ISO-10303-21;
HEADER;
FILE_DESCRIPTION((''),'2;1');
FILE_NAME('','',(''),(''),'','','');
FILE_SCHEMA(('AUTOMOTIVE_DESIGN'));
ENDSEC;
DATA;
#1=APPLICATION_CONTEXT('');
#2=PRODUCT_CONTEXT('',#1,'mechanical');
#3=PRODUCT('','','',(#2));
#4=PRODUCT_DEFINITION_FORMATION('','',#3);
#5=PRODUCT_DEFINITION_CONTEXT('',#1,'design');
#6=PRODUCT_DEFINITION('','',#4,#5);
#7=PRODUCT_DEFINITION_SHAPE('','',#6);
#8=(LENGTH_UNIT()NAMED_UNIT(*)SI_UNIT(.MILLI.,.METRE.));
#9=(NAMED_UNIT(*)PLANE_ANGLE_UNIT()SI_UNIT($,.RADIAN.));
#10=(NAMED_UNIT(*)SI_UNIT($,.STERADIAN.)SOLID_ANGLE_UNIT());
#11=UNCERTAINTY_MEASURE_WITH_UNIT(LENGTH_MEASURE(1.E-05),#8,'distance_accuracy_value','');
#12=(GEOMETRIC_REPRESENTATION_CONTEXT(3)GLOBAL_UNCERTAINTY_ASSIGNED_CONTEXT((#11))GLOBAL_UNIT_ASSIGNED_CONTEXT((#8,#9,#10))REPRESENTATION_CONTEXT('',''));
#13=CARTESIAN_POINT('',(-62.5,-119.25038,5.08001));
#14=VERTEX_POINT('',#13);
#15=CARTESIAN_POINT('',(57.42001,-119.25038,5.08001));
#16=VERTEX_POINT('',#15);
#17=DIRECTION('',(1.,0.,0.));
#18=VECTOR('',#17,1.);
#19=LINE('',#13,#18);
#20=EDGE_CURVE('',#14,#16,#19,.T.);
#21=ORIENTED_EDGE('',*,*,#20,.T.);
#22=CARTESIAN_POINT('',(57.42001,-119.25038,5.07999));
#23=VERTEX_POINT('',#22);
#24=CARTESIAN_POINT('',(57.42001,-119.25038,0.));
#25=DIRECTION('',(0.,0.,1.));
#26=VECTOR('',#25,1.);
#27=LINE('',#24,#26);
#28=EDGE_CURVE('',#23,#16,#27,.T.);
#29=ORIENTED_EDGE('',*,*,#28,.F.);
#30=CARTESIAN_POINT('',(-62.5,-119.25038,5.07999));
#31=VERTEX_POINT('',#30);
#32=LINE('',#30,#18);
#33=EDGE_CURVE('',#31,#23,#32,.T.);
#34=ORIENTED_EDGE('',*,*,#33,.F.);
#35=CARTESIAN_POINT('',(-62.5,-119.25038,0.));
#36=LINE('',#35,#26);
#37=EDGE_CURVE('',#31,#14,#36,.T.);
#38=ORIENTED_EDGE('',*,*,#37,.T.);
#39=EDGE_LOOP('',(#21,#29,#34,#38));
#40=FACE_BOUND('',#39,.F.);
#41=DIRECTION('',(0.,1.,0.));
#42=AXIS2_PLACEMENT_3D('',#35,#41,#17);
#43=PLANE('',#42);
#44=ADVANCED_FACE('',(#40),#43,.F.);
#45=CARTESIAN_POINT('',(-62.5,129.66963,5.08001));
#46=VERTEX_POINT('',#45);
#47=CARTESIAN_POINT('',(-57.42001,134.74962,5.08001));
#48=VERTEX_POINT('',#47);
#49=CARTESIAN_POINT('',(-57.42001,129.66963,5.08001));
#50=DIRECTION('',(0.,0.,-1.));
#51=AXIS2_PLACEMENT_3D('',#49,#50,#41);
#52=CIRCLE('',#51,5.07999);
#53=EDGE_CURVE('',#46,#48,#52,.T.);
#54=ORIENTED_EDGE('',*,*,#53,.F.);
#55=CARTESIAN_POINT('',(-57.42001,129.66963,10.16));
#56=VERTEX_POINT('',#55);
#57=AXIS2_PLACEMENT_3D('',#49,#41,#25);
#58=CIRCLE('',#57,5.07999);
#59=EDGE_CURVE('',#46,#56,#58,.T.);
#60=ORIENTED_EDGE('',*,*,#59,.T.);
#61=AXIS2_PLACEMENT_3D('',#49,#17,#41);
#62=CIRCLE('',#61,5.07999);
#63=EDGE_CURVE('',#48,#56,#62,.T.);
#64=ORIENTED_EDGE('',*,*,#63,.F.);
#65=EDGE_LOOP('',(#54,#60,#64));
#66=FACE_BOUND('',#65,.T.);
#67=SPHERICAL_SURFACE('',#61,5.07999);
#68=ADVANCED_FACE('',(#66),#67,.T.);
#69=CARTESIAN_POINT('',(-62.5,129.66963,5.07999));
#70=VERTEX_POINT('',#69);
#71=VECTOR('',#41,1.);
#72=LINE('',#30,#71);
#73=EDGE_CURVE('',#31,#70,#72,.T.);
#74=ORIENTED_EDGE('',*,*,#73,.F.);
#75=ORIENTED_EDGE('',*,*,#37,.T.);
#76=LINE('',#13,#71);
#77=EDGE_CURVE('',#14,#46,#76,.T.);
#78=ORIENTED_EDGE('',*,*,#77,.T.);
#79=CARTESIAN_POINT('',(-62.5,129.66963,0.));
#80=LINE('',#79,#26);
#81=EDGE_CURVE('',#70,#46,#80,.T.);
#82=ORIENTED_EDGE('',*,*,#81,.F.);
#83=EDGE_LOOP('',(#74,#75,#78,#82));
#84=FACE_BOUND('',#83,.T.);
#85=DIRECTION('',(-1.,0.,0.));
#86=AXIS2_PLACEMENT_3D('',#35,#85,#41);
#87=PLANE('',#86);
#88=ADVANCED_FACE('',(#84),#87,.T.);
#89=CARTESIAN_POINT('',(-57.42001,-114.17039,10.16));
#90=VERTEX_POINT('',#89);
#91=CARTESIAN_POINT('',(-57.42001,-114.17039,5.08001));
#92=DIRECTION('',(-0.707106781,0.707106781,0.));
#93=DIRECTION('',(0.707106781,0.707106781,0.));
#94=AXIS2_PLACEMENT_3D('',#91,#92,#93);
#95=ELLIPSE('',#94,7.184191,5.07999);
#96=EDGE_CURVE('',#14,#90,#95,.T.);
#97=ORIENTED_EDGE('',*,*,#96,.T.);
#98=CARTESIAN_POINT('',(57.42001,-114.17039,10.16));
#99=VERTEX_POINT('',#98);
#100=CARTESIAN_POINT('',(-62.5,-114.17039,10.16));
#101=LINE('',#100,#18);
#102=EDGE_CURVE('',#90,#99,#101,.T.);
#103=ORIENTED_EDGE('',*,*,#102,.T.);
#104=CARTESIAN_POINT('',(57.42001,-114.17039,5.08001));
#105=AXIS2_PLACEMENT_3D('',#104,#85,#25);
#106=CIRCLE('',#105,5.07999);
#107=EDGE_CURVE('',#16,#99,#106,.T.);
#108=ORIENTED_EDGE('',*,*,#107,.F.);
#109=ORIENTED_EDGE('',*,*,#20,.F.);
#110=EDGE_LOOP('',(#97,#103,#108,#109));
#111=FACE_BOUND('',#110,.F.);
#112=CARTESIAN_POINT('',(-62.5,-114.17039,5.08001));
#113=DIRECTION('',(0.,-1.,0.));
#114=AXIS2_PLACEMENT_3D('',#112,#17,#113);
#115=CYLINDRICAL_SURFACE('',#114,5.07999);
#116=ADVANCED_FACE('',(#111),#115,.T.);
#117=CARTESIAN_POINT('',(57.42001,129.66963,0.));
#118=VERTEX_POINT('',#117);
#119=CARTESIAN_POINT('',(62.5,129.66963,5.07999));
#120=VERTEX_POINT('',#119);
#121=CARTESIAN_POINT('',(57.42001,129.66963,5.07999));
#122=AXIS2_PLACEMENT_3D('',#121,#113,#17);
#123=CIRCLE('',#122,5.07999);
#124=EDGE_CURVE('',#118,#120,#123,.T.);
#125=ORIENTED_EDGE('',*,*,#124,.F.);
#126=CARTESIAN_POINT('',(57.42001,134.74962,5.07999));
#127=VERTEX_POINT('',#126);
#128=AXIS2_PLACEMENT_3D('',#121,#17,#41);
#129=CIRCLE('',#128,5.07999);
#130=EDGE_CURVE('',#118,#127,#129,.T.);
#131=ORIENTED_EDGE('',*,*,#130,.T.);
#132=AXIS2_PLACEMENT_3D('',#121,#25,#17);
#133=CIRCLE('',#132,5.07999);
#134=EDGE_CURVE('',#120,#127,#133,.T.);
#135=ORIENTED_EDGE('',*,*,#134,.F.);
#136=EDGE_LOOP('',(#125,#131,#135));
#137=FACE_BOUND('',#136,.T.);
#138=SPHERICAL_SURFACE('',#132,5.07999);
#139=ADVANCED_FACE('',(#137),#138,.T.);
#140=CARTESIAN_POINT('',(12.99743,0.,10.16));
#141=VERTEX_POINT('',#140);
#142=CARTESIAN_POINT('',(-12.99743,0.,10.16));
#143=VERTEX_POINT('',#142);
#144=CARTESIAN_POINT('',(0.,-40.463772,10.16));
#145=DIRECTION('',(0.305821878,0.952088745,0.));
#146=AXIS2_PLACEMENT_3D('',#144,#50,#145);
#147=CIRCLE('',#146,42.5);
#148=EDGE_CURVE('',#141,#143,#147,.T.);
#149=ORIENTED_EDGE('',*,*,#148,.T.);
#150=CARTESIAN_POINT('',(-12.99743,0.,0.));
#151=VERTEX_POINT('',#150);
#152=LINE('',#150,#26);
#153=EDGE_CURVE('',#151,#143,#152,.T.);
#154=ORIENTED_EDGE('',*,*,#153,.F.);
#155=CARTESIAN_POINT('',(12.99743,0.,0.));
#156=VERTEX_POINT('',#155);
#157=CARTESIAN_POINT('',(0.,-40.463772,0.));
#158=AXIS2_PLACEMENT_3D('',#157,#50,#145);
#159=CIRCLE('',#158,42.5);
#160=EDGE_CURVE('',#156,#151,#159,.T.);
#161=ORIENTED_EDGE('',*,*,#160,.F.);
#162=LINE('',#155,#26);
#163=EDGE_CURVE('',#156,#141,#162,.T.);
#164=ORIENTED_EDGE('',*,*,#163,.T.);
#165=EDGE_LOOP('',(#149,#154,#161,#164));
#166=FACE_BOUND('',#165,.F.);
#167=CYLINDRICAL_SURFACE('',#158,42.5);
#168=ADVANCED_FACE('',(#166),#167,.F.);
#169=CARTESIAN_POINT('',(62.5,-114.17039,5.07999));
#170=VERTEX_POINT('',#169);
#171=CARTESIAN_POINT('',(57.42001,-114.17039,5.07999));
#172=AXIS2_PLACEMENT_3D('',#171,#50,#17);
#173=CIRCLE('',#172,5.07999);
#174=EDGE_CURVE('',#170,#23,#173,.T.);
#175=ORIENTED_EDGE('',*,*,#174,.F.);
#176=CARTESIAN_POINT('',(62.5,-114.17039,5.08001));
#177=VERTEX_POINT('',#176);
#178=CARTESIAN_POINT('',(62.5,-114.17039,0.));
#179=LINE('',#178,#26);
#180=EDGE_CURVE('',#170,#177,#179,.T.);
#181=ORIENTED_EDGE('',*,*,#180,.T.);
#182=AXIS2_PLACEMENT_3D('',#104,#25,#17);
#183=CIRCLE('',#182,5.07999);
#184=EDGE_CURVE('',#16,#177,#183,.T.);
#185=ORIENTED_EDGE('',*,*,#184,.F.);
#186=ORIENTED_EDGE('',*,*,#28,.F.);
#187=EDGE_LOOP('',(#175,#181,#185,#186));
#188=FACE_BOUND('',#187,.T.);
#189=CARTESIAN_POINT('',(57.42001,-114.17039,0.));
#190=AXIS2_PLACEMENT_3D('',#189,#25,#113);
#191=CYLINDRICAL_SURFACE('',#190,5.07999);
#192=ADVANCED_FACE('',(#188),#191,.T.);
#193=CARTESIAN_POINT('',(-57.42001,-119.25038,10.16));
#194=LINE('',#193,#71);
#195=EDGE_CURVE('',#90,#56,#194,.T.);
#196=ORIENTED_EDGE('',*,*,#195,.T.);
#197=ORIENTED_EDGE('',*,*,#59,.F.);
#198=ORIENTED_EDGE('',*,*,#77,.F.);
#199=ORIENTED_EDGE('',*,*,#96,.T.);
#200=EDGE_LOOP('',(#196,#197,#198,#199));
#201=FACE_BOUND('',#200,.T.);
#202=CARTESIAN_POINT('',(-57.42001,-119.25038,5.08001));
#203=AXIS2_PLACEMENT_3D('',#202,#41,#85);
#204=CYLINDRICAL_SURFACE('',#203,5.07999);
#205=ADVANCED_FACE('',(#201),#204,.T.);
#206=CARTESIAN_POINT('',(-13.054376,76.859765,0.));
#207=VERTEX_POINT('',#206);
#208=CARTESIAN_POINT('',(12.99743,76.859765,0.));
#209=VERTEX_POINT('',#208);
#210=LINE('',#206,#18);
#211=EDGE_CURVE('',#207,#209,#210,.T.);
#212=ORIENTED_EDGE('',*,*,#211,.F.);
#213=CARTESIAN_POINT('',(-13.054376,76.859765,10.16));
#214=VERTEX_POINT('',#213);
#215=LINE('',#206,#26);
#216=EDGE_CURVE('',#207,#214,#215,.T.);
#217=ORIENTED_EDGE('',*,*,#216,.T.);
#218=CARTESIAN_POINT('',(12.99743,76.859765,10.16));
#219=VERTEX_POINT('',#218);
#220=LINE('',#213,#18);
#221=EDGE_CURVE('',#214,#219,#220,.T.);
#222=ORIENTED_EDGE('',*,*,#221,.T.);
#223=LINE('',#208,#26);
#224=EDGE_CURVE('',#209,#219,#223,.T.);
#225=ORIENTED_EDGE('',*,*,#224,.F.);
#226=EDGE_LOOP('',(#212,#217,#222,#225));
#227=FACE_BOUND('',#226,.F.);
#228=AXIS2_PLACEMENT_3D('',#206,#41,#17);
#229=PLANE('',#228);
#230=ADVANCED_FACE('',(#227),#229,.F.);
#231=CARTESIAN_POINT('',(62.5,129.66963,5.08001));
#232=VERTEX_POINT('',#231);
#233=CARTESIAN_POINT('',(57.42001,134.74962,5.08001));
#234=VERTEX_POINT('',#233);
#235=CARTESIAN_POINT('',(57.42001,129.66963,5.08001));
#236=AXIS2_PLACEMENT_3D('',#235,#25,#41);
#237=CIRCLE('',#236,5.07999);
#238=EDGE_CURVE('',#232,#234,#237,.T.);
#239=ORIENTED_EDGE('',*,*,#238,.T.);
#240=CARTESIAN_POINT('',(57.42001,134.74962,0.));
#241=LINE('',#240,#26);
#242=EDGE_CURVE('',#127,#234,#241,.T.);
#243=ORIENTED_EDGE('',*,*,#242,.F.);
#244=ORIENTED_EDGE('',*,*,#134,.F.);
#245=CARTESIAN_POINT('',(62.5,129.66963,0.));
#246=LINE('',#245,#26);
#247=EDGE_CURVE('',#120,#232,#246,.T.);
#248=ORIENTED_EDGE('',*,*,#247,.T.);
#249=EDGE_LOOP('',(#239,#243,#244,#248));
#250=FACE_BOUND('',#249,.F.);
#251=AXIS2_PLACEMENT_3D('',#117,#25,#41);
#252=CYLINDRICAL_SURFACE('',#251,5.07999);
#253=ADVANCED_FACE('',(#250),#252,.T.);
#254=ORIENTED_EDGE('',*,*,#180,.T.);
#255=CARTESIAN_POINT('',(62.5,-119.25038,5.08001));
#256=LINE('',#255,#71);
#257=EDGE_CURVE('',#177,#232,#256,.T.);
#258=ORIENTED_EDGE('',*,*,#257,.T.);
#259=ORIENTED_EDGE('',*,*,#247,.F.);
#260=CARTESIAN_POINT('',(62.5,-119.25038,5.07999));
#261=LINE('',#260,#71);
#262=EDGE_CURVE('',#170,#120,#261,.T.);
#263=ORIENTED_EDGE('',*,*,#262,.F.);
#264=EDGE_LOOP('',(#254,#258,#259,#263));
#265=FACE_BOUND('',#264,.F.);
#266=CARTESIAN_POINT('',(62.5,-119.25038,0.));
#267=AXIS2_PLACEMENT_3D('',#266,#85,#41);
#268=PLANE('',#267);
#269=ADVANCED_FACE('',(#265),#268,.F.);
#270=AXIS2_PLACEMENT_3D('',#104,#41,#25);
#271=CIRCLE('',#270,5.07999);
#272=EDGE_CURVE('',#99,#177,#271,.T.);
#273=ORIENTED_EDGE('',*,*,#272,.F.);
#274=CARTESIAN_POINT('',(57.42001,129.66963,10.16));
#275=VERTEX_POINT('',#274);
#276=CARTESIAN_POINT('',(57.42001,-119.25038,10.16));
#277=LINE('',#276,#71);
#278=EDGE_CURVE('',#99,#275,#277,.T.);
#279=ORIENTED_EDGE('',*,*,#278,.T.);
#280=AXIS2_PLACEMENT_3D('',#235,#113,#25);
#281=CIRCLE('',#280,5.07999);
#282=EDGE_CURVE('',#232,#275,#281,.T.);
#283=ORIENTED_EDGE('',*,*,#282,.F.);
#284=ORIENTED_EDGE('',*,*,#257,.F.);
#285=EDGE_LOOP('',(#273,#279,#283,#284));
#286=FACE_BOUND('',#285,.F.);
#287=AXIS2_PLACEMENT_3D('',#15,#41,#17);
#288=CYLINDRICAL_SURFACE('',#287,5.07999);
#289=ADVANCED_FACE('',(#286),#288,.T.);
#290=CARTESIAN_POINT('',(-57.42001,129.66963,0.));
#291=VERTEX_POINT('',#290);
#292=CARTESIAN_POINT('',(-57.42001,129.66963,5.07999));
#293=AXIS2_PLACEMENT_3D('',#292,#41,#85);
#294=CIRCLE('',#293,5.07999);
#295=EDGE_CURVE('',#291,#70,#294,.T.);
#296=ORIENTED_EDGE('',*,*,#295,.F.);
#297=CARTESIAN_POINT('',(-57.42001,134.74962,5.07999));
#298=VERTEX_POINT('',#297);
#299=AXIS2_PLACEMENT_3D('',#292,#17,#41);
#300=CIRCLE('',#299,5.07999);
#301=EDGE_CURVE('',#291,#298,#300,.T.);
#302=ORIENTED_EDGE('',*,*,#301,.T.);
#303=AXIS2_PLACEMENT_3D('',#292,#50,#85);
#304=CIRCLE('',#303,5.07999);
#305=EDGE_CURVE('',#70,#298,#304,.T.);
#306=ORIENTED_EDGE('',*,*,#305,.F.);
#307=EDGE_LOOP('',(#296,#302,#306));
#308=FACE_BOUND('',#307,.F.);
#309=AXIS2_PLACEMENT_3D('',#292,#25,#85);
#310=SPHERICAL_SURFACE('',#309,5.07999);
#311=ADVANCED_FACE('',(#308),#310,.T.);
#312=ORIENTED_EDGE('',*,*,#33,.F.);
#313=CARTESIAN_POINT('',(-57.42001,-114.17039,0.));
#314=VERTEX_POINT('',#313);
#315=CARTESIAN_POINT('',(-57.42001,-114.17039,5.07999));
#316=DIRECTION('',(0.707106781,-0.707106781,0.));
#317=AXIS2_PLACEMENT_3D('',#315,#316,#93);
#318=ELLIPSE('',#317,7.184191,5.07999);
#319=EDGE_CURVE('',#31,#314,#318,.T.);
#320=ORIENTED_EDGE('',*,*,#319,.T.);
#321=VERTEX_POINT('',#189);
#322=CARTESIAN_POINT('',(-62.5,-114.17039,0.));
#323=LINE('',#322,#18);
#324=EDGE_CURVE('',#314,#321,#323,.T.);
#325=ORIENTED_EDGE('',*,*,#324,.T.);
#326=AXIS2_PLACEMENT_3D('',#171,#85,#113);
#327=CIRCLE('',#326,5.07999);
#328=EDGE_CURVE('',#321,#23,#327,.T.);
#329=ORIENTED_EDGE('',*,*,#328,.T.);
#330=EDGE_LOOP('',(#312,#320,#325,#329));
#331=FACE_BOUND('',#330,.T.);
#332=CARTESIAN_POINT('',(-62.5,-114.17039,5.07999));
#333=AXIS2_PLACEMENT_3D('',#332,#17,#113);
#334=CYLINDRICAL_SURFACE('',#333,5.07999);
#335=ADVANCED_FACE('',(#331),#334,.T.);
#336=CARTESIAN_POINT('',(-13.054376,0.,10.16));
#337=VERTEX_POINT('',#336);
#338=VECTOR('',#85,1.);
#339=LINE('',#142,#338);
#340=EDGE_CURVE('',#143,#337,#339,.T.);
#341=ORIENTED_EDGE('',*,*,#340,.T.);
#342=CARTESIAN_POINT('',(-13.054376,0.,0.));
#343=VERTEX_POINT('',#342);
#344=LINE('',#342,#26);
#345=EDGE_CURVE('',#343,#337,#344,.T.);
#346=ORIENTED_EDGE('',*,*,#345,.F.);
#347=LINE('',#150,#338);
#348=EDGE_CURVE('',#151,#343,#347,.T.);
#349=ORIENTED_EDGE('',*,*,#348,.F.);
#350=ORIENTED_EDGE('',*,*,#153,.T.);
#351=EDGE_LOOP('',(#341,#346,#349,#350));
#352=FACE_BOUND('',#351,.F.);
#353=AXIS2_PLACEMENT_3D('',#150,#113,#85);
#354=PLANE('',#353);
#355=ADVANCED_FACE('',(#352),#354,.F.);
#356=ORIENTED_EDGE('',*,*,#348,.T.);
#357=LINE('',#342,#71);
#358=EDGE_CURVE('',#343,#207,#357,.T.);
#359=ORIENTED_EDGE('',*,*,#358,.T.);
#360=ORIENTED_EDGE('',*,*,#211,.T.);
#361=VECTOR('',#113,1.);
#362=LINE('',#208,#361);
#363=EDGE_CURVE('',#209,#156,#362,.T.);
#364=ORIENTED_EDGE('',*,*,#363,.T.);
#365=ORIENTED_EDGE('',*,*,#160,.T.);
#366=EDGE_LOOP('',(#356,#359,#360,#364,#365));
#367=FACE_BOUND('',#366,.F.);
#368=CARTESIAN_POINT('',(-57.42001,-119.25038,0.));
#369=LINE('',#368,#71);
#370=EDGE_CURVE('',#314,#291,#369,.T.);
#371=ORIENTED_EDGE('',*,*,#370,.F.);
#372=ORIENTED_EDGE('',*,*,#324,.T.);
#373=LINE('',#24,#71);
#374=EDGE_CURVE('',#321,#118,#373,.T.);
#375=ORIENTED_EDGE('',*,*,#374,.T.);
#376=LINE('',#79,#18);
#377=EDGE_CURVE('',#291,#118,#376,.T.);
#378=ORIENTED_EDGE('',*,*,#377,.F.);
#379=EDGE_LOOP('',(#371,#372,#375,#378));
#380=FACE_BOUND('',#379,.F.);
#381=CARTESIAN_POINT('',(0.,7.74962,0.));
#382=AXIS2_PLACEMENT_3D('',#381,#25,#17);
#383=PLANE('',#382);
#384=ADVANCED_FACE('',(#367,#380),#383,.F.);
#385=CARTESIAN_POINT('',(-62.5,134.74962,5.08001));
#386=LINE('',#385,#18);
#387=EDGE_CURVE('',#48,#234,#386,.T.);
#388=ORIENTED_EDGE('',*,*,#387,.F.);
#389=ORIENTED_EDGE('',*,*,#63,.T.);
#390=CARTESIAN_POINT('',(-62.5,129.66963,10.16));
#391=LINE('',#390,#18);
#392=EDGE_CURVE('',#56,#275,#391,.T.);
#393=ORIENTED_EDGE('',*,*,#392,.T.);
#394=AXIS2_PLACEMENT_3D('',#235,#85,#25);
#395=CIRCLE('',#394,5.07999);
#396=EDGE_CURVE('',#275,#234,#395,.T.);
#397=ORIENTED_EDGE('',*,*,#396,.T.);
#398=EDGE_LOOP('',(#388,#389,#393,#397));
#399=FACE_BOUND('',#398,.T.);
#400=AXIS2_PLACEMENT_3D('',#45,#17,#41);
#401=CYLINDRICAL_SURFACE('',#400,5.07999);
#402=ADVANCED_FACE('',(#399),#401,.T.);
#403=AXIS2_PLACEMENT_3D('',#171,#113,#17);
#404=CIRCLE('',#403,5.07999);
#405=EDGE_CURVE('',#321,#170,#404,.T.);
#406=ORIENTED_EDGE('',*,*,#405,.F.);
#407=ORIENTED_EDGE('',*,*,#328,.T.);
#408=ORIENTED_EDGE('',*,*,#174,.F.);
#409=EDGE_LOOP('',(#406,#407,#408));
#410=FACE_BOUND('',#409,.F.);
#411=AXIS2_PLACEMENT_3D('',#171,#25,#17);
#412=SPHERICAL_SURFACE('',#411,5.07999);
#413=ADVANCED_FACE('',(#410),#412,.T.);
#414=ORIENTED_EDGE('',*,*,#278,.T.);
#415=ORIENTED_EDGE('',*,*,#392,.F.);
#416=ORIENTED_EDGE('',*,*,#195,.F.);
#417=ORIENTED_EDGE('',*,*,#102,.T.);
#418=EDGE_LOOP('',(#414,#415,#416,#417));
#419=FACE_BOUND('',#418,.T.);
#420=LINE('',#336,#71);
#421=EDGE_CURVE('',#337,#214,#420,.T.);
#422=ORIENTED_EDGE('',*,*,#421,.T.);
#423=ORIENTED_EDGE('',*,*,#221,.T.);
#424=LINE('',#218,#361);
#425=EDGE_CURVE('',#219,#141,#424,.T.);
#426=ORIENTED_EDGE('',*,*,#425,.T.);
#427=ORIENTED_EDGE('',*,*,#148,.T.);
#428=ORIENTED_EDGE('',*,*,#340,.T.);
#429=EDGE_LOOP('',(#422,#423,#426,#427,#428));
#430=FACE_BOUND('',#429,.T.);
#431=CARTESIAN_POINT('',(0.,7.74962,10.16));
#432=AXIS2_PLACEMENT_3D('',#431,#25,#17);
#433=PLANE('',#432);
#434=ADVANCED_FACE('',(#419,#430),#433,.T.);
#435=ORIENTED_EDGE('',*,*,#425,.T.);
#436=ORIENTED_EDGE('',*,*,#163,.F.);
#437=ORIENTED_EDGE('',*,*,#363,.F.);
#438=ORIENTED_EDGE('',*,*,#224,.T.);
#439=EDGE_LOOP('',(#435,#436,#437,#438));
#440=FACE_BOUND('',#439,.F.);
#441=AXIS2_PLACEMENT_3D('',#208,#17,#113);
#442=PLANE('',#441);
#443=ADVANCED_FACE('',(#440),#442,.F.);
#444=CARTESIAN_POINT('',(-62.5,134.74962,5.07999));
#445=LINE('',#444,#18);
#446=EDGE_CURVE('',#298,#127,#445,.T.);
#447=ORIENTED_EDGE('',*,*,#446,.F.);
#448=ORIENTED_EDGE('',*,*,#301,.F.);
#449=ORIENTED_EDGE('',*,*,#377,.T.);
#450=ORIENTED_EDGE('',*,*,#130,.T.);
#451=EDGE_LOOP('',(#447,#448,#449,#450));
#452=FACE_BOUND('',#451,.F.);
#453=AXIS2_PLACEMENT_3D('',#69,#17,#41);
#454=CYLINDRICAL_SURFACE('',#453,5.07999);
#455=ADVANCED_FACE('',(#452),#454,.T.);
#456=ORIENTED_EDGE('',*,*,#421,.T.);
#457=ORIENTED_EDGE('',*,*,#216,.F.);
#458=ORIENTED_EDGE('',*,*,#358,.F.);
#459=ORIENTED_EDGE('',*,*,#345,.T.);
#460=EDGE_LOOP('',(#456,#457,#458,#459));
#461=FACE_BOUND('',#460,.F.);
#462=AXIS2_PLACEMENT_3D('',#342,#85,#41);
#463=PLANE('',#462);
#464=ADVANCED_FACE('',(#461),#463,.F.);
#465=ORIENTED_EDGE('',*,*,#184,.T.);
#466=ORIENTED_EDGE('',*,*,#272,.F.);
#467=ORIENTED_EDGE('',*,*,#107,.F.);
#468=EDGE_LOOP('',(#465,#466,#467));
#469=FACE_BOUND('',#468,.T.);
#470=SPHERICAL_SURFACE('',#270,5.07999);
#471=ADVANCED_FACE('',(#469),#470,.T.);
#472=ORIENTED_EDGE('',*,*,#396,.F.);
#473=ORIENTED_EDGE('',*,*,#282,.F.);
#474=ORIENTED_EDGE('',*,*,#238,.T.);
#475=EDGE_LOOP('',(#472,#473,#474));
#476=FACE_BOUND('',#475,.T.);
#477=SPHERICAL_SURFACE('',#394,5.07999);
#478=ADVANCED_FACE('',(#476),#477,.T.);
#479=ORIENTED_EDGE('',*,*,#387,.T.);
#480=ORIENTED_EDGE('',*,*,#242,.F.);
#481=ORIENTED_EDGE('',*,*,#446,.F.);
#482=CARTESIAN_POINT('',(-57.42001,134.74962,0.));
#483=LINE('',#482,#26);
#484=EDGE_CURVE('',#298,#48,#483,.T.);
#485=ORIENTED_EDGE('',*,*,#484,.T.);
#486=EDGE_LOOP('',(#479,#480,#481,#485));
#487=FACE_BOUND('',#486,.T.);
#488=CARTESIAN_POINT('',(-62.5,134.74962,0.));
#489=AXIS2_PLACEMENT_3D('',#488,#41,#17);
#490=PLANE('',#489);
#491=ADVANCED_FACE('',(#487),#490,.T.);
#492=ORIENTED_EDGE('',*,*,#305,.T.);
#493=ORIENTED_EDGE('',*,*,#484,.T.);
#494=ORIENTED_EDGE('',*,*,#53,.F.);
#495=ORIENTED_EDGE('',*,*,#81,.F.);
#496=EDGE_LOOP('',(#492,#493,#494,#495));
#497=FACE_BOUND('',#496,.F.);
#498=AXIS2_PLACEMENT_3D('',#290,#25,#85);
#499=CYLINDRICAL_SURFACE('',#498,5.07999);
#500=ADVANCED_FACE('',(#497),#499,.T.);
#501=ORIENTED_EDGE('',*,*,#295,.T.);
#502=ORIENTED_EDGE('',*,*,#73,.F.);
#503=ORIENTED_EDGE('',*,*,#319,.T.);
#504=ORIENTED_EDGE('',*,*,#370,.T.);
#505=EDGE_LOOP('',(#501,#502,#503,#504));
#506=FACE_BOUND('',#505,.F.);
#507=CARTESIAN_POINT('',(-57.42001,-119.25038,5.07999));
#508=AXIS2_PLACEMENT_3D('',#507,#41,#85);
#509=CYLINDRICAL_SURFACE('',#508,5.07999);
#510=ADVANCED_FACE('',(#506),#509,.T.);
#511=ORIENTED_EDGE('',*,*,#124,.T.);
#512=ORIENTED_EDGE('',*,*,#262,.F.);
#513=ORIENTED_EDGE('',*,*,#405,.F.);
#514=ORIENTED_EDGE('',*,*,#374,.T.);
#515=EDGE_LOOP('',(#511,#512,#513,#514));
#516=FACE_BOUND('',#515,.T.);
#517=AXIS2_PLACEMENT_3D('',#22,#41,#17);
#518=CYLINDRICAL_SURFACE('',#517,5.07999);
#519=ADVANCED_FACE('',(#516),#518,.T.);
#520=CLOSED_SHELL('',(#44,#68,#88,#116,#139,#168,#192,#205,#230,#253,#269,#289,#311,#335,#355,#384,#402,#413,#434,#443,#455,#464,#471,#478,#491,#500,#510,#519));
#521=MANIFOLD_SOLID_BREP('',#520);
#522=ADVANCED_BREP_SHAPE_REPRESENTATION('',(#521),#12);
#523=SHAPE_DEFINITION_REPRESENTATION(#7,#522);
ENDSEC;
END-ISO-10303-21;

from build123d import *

# Parameters (mm, degrees)
F0_W     = 125
F0_H     = 254
F1_DEPTH = 10.16
F2_R     = 5.07999


# Not quite as in the source:
# - a fillet or chamfer is up to 0.001 mm smaller than in the source, because OpenCascade refuses the exact size


with BuildPart() as f1:
    # F0 (on Top) → F1 (new body)
    with BuildSketch(Plane.XY):
        with Locations((0, 7.7496204972)):
            Rectangle(F0_W, F0_H)
        with BuildLine():
            ThreePointArc((12.9974298287, 0), (34.3412344545, -15.4252090897), (42.5, -40.4637716711))
            ThreePointArc((42.5, -40.4637716711), (-25.0385625813, -74.8050061256), (-12.9974298287, 0))
            Line((-12.9974298287, 0), (-13.0543755367, 0))
            Line((-13.0543755367, 0), (-13.0543755367, 76.8597647548))
            Line((-13.0543755367, 76.8597647548), (12.9974298287, 76.8597647548))
            Line((12.9974298287, 76.8597647548), (12.9974298287, 0))
        make_face(mode=Mode.SUBTRACT)
    extrude(amount=F1_DEPTH)

    # F2 (radius 5.08 in the source; OpenCascade refuses exactly that, so slightly less here)
    f2_edges = [f1.edges().sort_by_distance(p)[0] for p in [
        (0, 134.74962, 10.16),
        (-62.5, 134.74962, 5.08),
        (-62.5, 7.74962, 10.16),
        (62.5, 7.74962, 10.16),
        (0, -119.25038, 10.16),
        (-62.5, 7.74962, 0),
        (62.5, -119.25038, 5.08),
        (62.5, 134.74962, 5.08),
        (62.5, 7.74962, 0),
        (0, -119.25038, 0),
        (0, 134.74962, 0),
    ]]
    fillet(f2_edges, radius=F2_R)


solid = f1.part
